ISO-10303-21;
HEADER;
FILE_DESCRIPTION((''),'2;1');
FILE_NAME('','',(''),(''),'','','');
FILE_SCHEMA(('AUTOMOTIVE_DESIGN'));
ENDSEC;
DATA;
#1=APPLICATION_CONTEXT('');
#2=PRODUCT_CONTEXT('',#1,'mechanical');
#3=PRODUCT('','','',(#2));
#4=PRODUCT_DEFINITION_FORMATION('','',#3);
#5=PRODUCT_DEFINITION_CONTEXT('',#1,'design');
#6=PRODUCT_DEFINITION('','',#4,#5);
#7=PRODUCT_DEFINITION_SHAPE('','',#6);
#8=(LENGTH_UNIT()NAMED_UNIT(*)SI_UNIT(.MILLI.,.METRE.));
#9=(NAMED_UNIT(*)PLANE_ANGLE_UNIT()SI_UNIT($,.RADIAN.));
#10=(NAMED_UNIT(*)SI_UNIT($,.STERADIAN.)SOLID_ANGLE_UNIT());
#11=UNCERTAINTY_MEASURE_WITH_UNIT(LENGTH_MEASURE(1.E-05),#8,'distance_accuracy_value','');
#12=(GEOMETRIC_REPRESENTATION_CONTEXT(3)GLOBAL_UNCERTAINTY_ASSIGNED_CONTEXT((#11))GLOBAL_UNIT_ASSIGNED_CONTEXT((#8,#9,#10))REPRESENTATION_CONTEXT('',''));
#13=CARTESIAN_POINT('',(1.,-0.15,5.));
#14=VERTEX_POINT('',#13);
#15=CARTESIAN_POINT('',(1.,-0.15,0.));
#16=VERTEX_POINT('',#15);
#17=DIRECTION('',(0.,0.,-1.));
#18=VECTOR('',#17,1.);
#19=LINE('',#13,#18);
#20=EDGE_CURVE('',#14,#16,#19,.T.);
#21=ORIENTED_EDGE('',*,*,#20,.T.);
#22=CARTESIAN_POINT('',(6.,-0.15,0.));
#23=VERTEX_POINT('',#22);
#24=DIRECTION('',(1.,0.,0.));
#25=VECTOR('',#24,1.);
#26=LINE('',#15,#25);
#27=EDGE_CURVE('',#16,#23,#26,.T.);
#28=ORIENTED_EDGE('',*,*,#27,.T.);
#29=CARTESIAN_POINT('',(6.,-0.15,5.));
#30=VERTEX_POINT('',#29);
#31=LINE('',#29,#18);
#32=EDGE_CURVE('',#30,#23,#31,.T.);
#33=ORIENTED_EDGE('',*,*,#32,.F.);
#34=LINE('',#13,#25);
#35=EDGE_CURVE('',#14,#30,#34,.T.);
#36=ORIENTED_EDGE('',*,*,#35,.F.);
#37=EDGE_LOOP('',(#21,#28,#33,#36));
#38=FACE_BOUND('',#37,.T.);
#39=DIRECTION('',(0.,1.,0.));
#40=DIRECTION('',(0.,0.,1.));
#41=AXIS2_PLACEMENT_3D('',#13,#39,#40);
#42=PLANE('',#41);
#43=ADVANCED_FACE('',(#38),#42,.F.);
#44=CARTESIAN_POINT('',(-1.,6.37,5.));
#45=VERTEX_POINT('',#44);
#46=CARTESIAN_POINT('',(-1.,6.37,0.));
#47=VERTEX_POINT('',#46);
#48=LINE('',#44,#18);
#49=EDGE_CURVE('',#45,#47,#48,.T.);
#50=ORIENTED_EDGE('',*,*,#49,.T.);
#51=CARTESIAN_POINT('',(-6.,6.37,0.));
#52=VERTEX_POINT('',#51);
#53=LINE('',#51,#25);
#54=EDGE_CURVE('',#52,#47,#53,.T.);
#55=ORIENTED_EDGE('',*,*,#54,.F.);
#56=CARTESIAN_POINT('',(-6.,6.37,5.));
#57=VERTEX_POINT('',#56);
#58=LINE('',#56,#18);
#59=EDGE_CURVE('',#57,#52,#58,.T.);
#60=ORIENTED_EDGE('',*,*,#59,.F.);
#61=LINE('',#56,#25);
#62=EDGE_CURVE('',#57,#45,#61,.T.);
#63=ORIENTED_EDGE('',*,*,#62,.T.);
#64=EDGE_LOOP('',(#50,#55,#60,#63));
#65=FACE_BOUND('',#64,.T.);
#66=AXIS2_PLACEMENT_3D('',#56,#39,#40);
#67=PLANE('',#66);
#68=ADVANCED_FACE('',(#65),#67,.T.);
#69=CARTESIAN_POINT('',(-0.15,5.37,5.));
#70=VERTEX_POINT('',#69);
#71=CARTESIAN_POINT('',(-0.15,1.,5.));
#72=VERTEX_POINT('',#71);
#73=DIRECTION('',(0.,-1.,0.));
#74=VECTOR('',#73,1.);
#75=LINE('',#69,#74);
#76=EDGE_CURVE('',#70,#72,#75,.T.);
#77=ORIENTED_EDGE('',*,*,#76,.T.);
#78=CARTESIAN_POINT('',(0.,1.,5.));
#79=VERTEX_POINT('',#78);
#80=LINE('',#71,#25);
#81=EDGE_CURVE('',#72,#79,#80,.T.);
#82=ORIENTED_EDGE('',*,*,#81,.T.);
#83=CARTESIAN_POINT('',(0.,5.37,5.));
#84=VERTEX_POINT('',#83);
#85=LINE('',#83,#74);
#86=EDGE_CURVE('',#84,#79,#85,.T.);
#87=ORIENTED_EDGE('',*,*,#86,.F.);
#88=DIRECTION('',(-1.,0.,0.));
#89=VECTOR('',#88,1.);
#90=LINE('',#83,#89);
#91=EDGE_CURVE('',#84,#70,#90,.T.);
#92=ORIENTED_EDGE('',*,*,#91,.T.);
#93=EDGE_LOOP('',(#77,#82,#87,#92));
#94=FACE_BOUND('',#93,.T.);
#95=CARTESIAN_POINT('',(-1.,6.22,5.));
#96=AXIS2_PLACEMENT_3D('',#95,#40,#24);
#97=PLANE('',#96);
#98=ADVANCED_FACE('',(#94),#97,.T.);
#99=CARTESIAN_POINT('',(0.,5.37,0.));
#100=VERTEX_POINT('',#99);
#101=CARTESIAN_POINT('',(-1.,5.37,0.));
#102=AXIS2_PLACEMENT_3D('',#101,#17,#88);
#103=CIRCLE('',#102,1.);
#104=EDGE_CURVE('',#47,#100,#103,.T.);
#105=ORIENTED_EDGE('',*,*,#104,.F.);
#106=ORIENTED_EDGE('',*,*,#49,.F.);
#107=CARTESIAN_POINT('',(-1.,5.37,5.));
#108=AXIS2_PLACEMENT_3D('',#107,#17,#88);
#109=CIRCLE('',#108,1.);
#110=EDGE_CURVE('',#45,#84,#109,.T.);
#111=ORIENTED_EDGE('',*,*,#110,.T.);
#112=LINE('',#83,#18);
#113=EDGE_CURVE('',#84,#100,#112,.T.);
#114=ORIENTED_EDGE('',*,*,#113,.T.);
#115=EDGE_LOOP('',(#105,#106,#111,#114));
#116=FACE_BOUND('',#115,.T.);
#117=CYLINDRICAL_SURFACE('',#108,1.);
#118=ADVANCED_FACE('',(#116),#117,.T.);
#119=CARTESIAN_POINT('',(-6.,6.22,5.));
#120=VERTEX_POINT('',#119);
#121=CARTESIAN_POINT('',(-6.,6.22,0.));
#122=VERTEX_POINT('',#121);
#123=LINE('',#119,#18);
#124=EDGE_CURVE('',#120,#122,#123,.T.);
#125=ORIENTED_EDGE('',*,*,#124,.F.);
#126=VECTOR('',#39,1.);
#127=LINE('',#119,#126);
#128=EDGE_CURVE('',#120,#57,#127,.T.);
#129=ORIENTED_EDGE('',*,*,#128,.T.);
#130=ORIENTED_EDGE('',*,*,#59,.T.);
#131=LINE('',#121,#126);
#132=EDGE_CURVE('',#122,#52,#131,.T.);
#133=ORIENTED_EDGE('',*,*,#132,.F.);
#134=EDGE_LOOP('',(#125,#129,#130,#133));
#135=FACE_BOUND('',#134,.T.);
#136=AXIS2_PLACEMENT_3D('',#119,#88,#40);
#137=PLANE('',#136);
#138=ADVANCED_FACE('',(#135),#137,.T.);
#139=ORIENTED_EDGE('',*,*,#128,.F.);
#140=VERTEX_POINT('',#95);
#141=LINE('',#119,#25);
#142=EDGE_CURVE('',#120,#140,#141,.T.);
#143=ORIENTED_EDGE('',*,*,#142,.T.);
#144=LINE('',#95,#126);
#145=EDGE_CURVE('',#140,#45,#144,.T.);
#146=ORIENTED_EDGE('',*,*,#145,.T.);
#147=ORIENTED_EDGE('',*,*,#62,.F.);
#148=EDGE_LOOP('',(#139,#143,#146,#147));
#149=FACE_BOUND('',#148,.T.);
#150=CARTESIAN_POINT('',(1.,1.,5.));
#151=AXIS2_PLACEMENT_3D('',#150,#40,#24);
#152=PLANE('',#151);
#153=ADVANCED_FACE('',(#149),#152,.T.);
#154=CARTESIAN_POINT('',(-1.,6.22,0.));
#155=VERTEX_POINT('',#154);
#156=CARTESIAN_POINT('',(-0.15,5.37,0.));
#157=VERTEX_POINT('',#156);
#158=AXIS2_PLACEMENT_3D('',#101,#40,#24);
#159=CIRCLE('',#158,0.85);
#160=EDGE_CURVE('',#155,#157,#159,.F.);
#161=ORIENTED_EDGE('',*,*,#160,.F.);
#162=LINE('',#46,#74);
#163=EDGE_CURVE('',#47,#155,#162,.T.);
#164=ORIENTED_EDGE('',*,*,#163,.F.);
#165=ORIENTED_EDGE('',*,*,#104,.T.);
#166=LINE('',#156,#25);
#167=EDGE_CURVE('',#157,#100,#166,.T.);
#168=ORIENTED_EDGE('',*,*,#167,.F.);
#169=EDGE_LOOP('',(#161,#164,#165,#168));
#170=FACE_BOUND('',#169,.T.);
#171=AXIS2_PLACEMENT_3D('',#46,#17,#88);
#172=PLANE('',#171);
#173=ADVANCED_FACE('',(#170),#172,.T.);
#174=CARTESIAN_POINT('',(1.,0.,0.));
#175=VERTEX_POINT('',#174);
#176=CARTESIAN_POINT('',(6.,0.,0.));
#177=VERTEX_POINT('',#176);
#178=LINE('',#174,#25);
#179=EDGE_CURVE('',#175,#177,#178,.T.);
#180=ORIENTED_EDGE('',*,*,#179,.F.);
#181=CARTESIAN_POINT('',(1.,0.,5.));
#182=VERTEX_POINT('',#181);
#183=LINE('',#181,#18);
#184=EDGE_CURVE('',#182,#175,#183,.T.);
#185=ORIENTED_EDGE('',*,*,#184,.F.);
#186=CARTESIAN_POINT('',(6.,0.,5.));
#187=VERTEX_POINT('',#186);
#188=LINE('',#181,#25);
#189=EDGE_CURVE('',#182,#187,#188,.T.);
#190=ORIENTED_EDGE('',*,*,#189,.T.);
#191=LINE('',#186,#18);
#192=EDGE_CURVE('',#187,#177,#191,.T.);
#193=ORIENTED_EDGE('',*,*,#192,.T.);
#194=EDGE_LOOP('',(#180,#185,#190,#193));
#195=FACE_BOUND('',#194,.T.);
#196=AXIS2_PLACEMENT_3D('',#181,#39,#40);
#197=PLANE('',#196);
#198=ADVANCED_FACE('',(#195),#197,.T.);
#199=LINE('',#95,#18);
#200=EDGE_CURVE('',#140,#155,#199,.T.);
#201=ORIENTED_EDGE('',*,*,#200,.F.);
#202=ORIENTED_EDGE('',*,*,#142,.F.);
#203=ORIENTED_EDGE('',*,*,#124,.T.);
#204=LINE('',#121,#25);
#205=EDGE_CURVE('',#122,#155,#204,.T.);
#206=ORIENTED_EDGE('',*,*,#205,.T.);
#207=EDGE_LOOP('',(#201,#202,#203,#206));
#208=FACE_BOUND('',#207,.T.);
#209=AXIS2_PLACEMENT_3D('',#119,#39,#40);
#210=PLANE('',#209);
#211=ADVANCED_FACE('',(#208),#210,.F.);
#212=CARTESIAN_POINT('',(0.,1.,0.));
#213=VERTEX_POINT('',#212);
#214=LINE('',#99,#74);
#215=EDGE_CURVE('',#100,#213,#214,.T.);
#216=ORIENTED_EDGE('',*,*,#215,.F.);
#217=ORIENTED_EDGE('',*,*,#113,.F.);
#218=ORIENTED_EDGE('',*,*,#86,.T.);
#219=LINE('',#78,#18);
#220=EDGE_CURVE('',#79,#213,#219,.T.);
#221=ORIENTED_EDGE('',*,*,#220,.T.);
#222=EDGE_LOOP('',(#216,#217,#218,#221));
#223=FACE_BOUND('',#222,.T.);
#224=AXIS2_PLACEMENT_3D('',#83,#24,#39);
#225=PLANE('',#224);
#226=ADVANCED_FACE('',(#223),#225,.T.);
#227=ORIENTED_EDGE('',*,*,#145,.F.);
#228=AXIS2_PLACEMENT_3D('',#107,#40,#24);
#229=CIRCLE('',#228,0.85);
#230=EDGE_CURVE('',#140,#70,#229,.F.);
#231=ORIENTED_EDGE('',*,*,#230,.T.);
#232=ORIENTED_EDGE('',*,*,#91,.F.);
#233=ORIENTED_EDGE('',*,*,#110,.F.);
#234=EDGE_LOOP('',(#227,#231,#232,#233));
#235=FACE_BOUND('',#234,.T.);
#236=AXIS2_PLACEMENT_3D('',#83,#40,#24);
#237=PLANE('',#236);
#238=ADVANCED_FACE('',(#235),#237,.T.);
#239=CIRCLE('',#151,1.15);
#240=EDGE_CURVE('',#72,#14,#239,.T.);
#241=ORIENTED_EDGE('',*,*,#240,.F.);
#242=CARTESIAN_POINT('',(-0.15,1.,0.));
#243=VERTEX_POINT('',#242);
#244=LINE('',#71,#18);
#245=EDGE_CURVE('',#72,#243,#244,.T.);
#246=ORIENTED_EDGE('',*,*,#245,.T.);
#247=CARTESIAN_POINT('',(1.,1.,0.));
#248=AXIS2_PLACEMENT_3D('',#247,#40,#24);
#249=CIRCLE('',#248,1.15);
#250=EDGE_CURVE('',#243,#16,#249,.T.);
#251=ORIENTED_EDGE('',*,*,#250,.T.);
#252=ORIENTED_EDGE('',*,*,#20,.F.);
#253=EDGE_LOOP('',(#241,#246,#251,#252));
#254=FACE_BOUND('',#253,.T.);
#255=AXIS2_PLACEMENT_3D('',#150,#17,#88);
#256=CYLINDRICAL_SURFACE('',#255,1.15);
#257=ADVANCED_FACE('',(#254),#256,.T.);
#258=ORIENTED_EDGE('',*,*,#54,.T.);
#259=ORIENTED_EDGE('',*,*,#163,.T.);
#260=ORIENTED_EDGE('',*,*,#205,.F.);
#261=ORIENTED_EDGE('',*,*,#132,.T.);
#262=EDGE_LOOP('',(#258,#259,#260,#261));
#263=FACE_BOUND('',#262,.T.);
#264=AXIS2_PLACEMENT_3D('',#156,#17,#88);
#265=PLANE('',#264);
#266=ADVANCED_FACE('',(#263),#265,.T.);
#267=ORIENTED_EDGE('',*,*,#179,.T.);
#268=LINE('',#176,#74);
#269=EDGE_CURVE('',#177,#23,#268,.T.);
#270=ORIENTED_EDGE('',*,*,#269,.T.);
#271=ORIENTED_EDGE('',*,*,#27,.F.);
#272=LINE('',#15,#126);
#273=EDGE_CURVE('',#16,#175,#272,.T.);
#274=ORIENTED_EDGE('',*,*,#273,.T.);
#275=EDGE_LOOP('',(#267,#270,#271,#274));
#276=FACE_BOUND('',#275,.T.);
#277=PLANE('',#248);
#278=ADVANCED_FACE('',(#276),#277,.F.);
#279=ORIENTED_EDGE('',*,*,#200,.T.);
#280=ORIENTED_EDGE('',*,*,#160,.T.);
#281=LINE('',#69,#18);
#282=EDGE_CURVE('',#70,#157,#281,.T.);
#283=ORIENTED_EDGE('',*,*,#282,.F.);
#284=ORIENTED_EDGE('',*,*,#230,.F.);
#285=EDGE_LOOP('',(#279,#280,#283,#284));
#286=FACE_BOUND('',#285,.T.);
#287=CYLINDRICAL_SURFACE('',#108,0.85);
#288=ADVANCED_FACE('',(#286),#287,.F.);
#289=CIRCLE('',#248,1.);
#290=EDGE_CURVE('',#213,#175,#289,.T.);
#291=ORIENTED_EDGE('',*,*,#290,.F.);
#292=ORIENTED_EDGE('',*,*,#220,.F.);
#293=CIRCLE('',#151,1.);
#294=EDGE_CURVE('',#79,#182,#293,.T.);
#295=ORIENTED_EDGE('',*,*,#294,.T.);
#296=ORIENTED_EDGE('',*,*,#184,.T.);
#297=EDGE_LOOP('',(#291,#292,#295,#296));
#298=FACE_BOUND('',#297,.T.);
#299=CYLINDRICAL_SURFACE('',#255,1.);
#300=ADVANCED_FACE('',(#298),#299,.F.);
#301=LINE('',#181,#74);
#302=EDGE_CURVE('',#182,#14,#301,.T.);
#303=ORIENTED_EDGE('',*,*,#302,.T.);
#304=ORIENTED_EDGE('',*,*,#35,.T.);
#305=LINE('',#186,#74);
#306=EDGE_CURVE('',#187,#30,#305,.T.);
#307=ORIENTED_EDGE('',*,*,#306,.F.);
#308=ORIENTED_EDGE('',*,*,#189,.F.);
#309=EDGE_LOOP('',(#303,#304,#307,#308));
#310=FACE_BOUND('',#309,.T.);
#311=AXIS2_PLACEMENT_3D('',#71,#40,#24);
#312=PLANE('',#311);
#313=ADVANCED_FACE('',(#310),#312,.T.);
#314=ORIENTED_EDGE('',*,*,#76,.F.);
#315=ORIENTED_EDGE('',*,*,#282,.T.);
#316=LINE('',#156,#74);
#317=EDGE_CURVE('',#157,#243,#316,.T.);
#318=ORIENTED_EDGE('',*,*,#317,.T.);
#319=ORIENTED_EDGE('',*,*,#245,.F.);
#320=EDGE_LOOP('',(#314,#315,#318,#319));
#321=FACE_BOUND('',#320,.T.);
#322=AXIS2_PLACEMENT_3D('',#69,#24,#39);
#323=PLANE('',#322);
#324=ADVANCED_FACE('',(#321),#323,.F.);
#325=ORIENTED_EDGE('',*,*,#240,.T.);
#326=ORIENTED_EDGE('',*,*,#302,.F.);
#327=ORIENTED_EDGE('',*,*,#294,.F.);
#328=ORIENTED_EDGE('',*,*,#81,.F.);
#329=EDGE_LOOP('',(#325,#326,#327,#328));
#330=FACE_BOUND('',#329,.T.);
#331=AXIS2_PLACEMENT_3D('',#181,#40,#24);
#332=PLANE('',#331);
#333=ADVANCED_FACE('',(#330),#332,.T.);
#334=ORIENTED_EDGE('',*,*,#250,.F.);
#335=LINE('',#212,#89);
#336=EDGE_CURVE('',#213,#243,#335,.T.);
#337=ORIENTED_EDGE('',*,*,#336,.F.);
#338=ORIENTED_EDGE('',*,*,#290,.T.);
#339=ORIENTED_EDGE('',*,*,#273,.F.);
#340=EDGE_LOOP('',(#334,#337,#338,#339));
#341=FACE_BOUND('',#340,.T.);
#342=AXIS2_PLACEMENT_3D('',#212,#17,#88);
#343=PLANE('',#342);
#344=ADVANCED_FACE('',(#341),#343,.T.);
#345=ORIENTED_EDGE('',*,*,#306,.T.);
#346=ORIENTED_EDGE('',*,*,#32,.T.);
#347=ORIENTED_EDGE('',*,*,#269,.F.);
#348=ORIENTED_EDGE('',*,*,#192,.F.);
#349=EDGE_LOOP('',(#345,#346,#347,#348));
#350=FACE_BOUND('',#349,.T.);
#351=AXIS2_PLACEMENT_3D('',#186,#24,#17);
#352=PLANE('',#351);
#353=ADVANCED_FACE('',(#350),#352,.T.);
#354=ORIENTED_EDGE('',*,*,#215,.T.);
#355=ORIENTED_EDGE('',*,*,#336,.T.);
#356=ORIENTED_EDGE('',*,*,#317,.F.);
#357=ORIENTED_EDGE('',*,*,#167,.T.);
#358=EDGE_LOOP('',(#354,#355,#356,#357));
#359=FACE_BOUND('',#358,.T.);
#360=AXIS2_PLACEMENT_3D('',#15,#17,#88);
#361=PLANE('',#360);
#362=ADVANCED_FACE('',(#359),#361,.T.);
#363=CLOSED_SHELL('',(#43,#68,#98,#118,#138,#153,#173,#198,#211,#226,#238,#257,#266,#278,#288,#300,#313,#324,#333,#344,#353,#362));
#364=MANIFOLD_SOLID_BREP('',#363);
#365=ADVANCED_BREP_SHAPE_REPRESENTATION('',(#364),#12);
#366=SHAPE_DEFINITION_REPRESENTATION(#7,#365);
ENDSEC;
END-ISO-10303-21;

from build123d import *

# Parameters (mm, degrees)
BASE_FLANGE1_DEPTH = 5


# Sheet-metal steps are written as plain solids
with BuildPart() as part:
    # Sketch2 → Base-Flange1 (new body)
    with BuildSketch(Plane.XY):
        with BuildLine():
            Line((-6, 6.37), (-1, 6.37))
            ThreePointArc((-1, 6.37), (-0.292893219, 6.077106781), (0, 5.37))
            Line((0, 5.37), (0, 1))
            ThreePointArc((0, 1), (0.292893219, 0.292893219), (1, 0))
            Line((1, 0), (6, 0))
            Line((6, 0), (6, -0.15))
            Line((6, -0.15), (1, -0.15))
            ThreePointArc((1, -0.15), (0.186827202, 0.186827202), (-0.15, 1))
            Line((-0.15, 1), (-0.15, 5.37))
            ThreePointArc((-0.15, 5.37), (-0.398959236, 5.971040764), (-1, 6.22))
            Line((-1, 6.22), (-6, 6.22))
            Line((-6, 6.22), (-6, 6.37))
        make_face()
    extrude(amount=BASE_FLANGE1_DEPTH)


solid = part.part
